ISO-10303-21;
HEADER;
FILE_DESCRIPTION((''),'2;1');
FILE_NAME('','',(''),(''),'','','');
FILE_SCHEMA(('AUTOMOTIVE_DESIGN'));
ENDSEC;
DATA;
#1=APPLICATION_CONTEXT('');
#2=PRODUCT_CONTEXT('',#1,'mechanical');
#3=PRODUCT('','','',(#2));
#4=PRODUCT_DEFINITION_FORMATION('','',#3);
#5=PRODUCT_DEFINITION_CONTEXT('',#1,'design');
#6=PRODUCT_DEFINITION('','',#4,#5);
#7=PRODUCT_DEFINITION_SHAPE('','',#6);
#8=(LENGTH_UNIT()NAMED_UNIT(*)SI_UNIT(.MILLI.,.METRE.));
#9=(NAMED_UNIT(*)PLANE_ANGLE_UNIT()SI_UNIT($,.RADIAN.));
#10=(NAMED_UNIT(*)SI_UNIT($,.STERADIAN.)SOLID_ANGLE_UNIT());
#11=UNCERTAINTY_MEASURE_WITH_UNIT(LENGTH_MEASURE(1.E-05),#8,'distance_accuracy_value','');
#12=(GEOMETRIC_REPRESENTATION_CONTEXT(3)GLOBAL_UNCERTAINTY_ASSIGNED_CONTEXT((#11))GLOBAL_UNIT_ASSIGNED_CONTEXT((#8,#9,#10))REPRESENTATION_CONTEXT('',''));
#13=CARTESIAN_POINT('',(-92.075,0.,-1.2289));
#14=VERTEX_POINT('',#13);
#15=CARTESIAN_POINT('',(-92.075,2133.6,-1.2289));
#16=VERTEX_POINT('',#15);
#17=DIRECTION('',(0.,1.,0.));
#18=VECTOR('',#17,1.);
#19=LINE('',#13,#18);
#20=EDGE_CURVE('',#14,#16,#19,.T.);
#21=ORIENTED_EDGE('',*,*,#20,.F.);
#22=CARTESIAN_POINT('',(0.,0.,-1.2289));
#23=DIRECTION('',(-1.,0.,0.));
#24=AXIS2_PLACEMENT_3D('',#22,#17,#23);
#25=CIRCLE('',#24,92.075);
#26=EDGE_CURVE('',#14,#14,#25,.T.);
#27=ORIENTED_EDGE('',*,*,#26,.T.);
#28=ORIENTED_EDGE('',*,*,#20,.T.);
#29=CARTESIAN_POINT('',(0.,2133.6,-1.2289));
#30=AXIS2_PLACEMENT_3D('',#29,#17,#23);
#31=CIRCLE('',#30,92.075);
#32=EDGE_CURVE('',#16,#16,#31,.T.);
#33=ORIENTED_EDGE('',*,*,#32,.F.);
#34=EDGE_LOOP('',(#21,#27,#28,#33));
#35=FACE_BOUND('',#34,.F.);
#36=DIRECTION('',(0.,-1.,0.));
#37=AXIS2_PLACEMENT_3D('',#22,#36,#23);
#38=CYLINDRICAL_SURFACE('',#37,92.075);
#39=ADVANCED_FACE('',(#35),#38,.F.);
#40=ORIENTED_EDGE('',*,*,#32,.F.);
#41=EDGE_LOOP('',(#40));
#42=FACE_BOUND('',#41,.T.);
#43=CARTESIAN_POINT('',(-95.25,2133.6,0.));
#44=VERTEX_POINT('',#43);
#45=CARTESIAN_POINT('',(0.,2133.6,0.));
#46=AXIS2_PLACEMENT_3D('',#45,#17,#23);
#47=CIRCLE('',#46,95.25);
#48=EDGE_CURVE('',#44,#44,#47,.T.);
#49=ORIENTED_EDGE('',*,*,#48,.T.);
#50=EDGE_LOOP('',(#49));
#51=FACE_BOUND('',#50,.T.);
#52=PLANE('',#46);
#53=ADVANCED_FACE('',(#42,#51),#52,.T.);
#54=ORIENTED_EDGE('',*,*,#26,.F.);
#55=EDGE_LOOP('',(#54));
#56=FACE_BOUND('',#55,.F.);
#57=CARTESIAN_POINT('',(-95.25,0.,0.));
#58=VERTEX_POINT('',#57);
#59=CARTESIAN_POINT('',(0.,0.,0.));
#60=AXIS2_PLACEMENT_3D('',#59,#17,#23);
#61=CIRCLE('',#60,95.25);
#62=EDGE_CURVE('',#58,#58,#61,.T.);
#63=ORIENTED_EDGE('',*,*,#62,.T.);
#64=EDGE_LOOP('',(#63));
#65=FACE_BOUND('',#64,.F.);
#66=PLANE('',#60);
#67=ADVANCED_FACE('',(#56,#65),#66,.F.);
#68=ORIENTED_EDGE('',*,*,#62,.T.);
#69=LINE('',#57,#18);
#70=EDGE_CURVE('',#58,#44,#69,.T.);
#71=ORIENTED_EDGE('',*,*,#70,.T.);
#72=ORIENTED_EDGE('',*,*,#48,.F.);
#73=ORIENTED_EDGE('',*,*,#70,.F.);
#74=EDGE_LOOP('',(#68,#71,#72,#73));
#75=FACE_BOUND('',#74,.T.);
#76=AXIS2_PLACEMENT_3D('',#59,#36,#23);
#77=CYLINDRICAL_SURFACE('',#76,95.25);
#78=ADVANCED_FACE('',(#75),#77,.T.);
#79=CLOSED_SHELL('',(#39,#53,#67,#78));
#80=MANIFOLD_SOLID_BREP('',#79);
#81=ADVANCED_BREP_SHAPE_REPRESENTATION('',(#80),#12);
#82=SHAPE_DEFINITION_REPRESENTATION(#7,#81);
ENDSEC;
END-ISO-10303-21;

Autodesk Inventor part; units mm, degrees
ref_plane "YZ Plane" through (0, 0, 0) normal (1, 0, 0) x (0, 1, 0)
ref_plane "XZ Plane" through (0, 0, 0) normal (0, 1, 0) x (-1, 0, 0)
ref_plane "XY Plane" through (0, 0, 0) normal (0, 0, 1) x (1, 0, 0)
sketch "Sketch1" plane through (0, 0, 0) normal (0, 1, 0) x (-1, 0, 0)
  circle A0 centre (0, 0) radius 95.25
  circle A1 centre (0, -1.2289) radius 92.075
  dimension "d0" = 190.5
  dimension "d1" = 184.15
extrude "Extrusion1" add sketch "Sketch1" along normal blind 2133.6
properties part number "8 in Phenolic Linter" material "Phenolic Resin"
